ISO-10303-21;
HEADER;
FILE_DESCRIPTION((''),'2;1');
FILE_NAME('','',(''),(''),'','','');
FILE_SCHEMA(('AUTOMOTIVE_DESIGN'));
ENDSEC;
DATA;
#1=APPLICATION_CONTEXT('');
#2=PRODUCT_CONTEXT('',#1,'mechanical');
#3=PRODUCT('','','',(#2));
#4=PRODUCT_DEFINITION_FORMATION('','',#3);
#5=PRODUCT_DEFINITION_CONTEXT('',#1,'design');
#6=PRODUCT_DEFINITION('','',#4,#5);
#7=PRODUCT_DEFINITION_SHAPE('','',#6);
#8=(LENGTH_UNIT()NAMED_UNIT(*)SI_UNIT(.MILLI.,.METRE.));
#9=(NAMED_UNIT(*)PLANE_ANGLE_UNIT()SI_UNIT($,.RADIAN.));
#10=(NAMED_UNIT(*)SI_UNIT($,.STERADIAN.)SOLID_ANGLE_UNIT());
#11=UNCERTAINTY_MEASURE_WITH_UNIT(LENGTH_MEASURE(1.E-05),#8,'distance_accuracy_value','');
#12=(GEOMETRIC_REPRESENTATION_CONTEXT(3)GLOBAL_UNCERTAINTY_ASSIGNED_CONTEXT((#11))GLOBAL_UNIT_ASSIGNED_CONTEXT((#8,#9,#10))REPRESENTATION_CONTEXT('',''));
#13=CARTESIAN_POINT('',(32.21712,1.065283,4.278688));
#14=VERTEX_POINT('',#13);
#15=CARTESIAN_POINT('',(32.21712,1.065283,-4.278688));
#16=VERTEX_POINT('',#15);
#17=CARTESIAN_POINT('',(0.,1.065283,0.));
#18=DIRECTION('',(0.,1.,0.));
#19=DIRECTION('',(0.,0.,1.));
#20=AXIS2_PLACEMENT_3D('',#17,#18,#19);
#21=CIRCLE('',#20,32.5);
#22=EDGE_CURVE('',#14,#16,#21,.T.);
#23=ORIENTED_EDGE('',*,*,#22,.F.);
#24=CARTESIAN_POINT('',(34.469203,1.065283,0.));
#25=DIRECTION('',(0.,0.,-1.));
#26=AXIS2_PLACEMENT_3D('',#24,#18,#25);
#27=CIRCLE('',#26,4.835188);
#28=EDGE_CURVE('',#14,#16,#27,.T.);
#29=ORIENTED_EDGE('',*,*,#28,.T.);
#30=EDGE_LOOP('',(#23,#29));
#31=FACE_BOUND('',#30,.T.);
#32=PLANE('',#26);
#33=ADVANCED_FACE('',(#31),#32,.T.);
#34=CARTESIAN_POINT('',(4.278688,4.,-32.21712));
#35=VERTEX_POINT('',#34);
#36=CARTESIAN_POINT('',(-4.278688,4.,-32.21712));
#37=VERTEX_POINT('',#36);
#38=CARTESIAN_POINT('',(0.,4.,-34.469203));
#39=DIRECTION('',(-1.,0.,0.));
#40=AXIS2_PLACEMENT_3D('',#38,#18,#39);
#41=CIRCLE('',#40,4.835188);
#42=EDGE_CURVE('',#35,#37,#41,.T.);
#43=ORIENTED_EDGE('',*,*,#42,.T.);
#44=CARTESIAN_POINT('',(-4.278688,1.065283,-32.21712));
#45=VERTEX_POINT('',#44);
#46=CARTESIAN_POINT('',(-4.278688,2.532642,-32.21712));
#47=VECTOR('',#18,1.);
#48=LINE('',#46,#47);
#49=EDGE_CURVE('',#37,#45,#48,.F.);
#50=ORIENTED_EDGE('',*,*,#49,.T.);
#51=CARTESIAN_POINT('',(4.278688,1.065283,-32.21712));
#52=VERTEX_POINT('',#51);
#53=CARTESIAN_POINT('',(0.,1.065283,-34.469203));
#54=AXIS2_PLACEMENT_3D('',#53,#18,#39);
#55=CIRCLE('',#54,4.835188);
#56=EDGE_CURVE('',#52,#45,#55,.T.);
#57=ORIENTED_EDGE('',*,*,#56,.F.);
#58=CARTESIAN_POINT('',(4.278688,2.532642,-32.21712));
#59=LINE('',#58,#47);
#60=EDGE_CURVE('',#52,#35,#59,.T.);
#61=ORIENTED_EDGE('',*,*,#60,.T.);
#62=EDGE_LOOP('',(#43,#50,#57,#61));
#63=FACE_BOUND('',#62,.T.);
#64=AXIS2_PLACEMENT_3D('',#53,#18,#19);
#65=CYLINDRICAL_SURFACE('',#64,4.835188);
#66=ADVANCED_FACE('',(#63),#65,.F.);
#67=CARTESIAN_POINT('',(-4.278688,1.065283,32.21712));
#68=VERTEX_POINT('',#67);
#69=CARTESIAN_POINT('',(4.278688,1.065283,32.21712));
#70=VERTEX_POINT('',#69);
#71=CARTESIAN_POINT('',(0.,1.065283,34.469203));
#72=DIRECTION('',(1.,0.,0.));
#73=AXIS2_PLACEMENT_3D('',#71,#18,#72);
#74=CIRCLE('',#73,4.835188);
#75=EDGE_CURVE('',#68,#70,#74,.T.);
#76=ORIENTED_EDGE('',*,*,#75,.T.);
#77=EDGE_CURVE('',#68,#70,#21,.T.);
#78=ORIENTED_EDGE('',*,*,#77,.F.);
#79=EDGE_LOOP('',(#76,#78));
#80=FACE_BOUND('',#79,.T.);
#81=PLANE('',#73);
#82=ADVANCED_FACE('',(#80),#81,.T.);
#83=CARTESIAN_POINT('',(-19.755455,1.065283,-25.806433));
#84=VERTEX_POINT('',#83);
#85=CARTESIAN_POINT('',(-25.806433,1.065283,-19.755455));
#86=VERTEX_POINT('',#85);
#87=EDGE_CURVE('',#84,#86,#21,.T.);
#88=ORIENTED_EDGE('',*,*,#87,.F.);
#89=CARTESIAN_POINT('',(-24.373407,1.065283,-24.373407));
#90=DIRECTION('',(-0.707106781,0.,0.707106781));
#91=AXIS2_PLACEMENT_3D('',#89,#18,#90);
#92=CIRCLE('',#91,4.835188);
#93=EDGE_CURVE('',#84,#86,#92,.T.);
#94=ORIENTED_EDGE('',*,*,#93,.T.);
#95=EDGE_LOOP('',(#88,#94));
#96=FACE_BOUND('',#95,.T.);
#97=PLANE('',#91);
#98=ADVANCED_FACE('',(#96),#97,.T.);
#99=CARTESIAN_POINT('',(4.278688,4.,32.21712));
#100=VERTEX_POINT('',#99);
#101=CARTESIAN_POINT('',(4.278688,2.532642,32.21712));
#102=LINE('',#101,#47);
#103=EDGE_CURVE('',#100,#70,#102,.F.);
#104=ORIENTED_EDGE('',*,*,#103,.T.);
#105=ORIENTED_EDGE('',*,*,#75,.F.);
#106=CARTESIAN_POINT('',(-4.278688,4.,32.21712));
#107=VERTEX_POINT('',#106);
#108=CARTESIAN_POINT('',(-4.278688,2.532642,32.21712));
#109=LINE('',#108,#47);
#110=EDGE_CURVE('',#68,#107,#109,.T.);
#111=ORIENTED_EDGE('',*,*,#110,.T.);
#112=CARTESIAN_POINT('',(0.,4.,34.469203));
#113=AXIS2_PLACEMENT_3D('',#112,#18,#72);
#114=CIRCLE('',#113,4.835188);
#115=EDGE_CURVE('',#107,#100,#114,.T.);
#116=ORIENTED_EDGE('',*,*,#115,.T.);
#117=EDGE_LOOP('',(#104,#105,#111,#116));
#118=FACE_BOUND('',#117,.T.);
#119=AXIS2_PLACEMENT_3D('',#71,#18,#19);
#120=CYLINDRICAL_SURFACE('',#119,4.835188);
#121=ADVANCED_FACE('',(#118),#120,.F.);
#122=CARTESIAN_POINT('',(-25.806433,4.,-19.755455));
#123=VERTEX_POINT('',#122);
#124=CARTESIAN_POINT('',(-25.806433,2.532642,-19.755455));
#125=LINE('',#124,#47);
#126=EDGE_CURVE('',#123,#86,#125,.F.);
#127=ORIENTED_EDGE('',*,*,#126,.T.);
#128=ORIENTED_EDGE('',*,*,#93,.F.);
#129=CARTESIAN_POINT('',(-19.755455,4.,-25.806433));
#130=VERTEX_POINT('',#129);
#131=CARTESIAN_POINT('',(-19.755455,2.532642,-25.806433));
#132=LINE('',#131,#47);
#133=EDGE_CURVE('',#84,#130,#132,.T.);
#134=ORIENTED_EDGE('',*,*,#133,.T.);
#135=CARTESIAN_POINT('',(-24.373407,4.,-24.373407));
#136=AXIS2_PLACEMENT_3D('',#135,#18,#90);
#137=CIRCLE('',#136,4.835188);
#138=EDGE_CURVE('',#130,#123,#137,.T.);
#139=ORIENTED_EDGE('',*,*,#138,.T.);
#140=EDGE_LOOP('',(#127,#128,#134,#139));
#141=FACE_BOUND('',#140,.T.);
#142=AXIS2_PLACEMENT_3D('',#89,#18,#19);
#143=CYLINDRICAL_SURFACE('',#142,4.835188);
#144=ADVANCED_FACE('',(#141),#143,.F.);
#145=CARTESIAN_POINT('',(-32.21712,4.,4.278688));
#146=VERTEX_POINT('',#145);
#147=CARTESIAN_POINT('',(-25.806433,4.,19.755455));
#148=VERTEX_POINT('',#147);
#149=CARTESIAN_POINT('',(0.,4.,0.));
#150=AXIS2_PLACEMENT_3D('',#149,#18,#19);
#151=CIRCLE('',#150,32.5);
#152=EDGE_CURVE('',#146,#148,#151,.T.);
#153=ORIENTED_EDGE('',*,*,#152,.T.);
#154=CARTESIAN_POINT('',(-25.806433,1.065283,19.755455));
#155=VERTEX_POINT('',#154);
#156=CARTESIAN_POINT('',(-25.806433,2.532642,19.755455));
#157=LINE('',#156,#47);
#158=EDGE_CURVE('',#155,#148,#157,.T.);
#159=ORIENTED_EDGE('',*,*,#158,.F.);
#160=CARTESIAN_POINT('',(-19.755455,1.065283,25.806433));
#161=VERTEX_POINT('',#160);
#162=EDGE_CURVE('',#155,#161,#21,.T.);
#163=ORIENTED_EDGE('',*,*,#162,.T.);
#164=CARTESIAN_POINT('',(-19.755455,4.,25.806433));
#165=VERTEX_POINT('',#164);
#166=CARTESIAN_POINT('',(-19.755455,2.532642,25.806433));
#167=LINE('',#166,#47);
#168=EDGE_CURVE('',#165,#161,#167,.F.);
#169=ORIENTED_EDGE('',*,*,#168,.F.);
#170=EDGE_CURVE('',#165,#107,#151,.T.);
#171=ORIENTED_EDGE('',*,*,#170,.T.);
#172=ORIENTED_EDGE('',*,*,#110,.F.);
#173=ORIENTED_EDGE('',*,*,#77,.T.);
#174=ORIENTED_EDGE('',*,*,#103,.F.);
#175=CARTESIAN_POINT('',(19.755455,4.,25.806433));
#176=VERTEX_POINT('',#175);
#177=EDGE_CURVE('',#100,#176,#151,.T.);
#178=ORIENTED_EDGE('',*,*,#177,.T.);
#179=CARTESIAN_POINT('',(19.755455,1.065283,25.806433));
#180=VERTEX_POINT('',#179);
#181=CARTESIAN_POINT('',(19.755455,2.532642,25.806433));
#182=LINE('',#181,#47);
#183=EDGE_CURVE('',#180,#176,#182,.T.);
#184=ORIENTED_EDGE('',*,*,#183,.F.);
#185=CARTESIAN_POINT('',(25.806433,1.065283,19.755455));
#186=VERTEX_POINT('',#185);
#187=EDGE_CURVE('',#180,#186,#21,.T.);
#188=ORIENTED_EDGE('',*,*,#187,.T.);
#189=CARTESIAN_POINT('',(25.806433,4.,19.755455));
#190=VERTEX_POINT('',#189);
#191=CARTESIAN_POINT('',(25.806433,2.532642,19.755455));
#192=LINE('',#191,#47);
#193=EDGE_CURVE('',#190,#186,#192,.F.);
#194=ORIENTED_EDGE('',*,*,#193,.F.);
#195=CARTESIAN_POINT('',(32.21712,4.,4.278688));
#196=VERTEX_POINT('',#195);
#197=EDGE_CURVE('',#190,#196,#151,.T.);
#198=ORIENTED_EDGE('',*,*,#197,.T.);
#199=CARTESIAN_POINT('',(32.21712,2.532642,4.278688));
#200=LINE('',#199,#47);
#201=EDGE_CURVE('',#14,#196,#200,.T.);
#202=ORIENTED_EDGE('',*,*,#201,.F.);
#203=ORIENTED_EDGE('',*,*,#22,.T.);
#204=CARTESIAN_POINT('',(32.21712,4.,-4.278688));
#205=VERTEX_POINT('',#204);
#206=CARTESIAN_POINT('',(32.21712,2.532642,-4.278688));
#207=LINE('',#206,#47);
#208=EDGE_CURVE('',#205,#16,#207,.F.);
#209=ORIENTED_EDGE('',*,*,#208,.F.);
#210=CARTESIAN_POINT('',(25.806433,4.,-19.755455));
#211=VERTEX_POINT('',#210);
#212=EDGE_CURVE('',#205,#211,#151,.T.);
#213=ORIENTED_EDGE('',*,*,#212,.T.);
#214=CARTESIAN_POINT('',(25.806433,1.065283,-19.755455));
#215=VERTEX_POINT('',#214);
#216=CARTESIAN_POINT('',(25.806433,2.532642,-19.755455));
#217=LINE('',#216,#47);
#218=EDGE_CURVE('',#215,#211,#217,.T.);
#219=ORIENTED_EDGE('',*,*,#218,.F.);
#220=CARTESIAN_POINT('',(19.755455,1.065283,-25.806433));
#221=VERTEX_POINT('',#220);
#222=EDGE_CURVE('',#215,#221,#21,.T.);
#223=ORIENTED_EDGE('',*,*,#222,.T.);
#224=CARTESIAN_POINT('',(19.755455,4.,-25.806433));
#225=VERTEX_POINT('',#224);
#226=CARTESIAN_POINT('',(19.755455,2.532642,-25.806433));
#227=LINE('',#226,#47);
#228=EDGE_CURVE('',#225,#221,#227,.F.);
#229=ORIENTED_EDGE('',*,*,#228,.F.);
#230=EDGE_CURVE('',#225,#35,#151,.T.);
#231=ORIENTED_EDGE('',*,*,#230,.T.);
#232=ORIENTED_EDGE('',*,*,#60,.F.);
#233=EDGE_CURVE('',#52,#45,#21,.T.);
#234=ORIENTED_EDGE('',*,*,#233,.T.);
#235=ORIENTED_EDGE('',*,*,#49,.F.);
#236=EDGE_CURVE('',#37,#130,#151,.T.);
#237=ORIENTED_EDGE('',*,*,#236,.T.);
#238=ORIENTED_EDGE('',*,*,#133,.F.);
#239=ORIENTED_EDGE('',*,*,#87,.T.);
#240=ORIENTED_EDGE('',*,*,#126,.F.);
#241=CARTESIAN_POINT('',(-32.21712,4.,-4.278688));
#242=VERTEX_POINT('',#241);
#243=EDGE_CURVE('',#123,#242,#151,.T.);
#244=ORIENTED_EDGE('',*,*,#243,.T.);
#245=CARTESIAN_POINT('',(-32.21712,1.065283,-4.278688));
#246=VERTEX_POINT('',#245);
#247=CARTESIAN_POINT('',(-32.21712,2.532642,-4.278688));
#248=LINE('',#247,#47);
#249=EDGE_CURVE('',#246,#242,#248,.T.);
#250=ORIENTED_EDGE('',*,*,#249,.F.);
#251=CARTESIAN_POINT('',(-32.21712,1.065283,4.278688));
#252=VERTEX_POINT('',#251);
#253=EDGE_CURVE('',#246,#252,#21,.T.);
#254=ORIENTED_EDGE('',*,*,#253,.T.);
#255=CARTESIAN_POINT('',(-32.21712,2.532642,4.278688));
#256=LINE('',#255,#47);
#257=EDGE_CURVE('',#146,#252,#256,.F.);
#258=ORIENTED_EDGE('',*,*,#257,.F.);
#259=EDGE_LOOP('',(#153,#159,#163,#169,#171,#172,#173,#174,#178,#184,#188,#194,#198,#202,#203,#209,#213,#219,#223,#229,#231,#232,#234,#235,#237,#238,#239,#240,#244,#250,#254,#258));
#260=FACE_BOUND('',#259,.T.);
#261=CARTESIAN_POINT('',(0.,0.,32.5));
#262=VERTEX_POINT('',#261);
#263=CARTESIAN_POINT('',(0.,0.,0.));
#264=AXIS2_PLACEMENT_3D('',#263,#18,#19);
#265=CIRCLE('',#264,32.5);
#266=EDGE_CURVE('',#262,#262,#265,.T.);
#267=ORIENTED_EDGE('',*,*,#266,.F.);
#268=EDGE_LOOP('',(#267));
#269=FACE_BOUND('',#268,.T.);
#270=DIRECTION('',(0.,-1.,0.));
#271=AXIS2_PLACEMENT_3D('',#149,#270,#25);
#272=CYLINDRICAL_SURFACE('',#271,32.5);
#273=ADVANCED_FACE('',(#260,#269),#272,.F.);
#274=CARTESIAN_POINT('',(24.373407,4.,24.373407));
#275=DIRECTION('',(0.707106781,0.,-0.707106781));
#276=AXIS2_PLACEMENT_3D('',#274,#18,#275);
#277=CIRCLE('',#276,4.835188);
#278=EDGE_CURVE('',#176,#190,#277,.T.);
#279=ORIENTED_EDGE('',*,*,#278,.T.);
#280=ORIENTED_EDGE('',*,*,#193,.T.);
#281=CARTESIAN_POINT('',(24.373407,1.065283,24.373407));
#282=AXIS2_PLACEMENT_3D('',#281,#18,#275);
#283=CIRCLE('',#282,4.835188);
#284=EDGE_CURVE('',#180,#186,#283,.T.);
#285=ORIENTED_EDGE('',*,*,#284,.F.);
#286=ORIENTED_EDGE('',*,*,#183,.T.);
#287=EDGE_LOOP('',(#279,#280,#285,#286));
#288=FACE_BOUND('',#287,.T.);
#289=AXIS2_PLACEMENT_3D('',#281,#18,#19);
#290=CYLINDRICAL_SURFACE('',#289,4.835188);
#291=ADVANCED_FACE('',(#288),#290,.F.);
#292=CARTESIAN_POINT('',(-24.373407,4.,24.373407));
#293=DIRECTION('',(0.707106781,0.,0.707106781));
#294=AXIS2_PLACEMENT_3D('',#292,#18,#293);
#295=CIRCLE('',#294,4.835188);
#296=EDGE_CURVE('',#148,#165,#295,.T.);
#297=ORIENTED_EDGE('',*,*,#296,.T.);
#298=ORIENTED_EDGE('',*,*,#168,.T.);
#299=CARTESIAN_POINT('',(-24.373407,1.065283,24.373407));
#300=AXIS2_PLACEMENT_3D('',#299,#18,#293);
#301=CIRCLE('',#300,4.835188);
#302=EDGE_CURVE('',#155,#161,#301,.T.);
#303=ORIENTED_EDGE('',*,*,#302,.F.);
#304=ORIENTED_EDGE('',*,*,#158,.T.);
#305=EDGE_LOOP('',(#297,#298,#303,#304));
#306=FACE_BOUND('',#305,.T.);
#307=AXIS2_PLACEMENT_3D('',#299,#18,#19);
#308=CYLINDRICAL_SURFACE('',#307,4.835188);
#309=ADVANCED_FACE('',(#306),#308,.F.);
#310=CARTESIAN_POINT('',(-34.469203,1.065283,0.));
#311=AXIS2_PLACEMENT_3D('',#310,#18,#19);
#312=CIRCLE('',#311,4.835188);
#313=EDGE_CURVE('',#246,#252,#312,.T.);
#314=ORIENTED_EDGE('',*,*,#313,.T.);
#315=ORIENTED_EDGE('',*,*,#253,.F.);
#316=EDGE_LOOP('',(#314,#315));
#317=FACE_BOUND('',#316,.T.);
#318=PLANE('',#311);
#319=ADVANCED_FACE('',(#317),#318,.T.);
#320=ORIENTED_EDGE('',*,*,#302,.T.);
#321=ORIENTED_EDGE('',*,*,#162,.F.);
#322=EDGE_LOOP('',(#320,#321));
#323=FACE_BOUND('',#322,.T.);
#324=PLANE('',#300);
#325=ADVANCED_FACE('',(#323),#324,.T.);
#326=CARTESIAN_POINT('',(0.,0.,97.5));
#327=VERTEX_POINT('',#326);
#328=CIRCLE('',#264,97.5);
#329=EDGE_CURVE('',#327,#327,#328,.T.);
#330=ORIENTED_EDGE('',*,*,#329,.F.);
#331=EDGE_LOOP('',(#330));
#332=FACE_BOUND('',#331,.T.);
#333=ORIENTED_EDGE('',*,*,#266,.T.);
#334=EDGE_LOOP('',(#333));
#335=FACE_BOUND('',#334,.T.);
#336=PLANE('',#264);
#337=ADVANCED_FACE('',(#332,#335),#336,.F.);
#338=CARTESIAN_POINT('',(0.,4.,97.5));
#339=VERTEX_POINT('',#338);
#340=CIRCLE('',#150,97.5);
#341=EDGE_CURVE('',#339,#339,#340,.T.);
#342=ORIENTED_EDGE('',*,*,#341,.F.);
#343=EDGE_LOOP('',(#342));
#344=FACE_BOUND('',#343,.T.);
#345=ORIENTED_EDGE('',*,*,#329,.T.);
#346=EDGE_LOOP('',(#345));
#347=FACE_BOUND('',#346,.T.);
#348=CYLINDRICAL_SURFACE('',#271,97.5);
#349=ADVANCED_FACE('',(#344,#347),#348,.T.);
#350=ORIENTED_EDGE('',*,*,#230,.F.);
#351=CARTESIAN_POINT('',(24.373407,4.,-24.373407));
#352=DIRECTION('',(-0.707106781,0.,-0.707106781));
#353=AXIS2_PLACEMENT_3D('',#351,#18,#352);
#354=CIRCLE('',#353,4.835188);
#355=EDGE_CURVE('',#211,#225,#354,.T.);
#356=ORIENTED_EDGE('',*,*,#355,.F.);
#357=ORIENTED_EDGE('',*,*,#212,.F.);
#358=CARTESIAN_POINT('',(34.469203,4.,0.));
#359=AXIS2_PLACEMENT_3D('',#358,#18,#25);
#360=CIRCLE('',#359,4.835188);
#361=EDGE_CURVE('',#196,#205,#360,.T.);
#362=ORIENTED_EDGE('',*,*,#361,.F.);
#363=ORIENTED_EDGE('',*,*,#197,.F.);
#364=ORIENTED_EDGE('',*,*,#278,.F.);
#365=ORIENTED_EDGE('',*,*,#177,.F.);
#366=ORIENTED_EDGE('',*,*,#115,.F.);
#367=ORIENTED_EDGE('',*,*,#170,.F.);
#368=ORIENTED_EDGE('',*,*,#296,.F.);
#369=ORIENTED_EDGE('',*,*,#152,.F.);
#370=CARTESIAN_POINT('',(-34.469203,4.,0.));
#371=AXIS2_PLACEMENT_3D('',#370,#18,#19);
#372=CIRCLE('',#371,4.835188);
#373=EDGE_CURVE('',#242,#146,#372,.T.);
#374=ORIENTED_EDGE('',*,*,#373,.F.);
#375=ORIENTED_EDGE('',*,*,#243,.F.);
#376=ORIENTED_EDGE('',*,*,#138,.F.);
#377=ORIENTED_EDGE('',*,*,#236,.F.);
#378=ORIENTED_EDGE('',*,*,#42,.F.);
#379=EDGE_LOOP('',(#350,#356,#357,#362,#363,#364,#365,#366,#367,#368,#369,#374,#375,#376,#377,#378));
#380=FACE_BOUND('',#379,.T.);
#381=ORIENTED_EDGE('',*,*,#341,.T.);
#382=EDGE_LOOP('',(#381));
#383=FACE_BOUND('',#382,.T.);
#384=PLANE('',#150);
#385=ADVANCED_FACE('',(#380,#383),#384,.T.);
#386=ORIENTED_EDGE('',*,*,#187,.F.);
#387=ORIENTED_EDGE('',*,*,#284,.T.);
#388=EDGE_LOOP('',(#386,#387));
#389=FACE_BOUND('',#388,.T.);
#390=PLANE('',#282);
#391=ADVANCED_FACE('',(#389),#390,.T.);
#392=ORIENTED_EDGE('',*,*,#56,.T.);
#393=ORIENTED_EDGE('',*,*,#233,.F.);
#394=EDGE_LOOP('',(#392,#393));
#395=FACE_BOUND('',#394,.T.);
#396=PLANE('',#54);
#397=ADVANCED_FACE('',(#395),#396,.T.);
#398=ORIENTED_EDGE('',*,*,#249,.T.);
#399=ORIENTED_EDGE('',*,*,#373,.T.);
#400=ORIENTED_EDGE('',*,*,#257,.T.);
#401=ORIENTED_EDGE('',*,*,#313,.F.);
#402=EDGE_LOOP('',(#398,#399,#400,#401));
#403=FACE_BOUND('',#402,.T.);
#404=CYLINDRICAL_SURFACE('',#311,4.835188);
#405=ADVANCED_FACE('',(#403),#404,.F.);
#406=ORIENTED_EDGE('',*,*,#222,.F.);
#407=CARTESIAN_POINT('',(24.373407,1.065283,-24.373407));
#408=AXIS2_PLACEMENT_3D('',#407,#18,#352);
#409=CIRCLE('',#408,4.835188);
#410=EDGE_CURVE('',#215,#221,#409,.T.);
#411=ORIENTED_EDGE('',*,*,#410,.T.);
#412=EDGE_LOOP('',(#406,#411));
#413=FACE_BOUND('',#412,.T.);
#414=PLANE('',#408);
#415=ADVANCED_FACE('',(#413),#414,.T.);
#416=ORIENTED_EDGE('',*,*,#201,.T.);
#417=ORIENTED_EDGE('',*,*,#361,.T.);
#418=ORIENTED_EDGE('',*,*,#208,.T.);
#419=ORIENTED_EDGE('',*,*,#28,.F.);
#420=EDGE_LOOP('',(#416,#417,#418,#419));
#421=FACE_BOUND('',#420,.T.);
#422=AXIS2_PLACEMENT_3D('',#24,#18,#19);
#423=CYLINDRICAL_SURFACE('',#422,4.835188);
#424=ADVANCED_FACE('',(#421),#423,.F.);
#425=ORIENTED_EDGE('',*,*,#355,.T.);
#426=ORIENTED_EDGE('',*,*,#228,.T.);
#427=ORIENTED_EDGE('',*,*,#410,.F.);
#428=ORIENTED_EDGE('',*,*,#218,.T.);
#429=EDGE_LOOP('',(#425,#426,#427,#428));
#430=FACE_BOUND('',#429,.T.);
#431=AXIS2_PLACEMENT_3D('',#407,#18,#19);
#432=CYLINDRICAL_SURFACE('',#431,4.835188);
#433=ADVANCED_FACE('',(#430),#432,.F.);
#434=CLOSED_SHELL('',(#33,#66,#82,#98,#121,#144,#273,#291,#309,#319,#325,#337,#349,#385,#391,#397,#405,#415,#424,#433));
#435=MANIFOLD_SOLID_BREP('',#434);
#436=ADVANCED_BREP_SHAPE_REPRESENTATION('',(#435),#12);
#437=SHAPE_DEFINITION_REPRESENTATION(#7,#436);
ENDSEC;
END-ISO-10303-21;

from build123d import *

# Parameters (mm, degrees)
SKETCH1_R           = 97.5
BOSS_EXTRUDE1_DEPTH = 4
SKETCH2_R           = 32.5
CUT_EXTRUDE1_DEPTH  = 138.943829148
SKETCH3_R           = 4.835188449
CUT_EXTRUDE2_DEPTH  = 2.934716604
CIRPATTERN1_COUNT   = 8


with BuildPart() as part:
    # Sketch1 → Boss-Extrude1 (new body)
    with BuildSketch(Plane(origin=(0, 0, 0), x_dir=(1, 0, 0), z_dir=(0, 1, 0))):
        Circle(SKETCH1_R)
    extrude(amount=BOSS_EXTRUDE1_DEPTH)

    # Sketch2 → Cut-Extrude1 (cut, through all)
    with BuildSketch(Plane(origin=(0, 0, 0), x_dir=(1, 0, 0), z_dir=(0, 1, 0))):
        Circle(SKETCH2_R)
    extrude(amount=CUT_EXTRUDE1_DEPTH, mode=Mode.SUBTRACT)

    # Sketch3 → Cut-Extrude2 (cut)
    with BuildSketch(Plane(origin=(0, 4, 0), x_dir=(1, 0, 0), z_dir=(0, 1, 0))):
        with Locations((-34.469203004, 0)):
            Circle(SKETCH3_R)
    cut_extrude2 = extrude(amount=-CUT_EXTRUDE2_DEPTH, mode=Mode.SUBTRACT)

    # CirPattern1: Cut-Extrude2 ×8 about axis
    cirpattern1_axis = Axis((0, 0, 0), (0, 1, 0))
    for i in range(1, CIRPATTERN1_COUNT):
        add(cut_extrude2.rotate(cirpattern1_axis, i * 360 / CIRPATTERN1_COUNT), mode=Mode.SUBTRACT)


solid = part.part
